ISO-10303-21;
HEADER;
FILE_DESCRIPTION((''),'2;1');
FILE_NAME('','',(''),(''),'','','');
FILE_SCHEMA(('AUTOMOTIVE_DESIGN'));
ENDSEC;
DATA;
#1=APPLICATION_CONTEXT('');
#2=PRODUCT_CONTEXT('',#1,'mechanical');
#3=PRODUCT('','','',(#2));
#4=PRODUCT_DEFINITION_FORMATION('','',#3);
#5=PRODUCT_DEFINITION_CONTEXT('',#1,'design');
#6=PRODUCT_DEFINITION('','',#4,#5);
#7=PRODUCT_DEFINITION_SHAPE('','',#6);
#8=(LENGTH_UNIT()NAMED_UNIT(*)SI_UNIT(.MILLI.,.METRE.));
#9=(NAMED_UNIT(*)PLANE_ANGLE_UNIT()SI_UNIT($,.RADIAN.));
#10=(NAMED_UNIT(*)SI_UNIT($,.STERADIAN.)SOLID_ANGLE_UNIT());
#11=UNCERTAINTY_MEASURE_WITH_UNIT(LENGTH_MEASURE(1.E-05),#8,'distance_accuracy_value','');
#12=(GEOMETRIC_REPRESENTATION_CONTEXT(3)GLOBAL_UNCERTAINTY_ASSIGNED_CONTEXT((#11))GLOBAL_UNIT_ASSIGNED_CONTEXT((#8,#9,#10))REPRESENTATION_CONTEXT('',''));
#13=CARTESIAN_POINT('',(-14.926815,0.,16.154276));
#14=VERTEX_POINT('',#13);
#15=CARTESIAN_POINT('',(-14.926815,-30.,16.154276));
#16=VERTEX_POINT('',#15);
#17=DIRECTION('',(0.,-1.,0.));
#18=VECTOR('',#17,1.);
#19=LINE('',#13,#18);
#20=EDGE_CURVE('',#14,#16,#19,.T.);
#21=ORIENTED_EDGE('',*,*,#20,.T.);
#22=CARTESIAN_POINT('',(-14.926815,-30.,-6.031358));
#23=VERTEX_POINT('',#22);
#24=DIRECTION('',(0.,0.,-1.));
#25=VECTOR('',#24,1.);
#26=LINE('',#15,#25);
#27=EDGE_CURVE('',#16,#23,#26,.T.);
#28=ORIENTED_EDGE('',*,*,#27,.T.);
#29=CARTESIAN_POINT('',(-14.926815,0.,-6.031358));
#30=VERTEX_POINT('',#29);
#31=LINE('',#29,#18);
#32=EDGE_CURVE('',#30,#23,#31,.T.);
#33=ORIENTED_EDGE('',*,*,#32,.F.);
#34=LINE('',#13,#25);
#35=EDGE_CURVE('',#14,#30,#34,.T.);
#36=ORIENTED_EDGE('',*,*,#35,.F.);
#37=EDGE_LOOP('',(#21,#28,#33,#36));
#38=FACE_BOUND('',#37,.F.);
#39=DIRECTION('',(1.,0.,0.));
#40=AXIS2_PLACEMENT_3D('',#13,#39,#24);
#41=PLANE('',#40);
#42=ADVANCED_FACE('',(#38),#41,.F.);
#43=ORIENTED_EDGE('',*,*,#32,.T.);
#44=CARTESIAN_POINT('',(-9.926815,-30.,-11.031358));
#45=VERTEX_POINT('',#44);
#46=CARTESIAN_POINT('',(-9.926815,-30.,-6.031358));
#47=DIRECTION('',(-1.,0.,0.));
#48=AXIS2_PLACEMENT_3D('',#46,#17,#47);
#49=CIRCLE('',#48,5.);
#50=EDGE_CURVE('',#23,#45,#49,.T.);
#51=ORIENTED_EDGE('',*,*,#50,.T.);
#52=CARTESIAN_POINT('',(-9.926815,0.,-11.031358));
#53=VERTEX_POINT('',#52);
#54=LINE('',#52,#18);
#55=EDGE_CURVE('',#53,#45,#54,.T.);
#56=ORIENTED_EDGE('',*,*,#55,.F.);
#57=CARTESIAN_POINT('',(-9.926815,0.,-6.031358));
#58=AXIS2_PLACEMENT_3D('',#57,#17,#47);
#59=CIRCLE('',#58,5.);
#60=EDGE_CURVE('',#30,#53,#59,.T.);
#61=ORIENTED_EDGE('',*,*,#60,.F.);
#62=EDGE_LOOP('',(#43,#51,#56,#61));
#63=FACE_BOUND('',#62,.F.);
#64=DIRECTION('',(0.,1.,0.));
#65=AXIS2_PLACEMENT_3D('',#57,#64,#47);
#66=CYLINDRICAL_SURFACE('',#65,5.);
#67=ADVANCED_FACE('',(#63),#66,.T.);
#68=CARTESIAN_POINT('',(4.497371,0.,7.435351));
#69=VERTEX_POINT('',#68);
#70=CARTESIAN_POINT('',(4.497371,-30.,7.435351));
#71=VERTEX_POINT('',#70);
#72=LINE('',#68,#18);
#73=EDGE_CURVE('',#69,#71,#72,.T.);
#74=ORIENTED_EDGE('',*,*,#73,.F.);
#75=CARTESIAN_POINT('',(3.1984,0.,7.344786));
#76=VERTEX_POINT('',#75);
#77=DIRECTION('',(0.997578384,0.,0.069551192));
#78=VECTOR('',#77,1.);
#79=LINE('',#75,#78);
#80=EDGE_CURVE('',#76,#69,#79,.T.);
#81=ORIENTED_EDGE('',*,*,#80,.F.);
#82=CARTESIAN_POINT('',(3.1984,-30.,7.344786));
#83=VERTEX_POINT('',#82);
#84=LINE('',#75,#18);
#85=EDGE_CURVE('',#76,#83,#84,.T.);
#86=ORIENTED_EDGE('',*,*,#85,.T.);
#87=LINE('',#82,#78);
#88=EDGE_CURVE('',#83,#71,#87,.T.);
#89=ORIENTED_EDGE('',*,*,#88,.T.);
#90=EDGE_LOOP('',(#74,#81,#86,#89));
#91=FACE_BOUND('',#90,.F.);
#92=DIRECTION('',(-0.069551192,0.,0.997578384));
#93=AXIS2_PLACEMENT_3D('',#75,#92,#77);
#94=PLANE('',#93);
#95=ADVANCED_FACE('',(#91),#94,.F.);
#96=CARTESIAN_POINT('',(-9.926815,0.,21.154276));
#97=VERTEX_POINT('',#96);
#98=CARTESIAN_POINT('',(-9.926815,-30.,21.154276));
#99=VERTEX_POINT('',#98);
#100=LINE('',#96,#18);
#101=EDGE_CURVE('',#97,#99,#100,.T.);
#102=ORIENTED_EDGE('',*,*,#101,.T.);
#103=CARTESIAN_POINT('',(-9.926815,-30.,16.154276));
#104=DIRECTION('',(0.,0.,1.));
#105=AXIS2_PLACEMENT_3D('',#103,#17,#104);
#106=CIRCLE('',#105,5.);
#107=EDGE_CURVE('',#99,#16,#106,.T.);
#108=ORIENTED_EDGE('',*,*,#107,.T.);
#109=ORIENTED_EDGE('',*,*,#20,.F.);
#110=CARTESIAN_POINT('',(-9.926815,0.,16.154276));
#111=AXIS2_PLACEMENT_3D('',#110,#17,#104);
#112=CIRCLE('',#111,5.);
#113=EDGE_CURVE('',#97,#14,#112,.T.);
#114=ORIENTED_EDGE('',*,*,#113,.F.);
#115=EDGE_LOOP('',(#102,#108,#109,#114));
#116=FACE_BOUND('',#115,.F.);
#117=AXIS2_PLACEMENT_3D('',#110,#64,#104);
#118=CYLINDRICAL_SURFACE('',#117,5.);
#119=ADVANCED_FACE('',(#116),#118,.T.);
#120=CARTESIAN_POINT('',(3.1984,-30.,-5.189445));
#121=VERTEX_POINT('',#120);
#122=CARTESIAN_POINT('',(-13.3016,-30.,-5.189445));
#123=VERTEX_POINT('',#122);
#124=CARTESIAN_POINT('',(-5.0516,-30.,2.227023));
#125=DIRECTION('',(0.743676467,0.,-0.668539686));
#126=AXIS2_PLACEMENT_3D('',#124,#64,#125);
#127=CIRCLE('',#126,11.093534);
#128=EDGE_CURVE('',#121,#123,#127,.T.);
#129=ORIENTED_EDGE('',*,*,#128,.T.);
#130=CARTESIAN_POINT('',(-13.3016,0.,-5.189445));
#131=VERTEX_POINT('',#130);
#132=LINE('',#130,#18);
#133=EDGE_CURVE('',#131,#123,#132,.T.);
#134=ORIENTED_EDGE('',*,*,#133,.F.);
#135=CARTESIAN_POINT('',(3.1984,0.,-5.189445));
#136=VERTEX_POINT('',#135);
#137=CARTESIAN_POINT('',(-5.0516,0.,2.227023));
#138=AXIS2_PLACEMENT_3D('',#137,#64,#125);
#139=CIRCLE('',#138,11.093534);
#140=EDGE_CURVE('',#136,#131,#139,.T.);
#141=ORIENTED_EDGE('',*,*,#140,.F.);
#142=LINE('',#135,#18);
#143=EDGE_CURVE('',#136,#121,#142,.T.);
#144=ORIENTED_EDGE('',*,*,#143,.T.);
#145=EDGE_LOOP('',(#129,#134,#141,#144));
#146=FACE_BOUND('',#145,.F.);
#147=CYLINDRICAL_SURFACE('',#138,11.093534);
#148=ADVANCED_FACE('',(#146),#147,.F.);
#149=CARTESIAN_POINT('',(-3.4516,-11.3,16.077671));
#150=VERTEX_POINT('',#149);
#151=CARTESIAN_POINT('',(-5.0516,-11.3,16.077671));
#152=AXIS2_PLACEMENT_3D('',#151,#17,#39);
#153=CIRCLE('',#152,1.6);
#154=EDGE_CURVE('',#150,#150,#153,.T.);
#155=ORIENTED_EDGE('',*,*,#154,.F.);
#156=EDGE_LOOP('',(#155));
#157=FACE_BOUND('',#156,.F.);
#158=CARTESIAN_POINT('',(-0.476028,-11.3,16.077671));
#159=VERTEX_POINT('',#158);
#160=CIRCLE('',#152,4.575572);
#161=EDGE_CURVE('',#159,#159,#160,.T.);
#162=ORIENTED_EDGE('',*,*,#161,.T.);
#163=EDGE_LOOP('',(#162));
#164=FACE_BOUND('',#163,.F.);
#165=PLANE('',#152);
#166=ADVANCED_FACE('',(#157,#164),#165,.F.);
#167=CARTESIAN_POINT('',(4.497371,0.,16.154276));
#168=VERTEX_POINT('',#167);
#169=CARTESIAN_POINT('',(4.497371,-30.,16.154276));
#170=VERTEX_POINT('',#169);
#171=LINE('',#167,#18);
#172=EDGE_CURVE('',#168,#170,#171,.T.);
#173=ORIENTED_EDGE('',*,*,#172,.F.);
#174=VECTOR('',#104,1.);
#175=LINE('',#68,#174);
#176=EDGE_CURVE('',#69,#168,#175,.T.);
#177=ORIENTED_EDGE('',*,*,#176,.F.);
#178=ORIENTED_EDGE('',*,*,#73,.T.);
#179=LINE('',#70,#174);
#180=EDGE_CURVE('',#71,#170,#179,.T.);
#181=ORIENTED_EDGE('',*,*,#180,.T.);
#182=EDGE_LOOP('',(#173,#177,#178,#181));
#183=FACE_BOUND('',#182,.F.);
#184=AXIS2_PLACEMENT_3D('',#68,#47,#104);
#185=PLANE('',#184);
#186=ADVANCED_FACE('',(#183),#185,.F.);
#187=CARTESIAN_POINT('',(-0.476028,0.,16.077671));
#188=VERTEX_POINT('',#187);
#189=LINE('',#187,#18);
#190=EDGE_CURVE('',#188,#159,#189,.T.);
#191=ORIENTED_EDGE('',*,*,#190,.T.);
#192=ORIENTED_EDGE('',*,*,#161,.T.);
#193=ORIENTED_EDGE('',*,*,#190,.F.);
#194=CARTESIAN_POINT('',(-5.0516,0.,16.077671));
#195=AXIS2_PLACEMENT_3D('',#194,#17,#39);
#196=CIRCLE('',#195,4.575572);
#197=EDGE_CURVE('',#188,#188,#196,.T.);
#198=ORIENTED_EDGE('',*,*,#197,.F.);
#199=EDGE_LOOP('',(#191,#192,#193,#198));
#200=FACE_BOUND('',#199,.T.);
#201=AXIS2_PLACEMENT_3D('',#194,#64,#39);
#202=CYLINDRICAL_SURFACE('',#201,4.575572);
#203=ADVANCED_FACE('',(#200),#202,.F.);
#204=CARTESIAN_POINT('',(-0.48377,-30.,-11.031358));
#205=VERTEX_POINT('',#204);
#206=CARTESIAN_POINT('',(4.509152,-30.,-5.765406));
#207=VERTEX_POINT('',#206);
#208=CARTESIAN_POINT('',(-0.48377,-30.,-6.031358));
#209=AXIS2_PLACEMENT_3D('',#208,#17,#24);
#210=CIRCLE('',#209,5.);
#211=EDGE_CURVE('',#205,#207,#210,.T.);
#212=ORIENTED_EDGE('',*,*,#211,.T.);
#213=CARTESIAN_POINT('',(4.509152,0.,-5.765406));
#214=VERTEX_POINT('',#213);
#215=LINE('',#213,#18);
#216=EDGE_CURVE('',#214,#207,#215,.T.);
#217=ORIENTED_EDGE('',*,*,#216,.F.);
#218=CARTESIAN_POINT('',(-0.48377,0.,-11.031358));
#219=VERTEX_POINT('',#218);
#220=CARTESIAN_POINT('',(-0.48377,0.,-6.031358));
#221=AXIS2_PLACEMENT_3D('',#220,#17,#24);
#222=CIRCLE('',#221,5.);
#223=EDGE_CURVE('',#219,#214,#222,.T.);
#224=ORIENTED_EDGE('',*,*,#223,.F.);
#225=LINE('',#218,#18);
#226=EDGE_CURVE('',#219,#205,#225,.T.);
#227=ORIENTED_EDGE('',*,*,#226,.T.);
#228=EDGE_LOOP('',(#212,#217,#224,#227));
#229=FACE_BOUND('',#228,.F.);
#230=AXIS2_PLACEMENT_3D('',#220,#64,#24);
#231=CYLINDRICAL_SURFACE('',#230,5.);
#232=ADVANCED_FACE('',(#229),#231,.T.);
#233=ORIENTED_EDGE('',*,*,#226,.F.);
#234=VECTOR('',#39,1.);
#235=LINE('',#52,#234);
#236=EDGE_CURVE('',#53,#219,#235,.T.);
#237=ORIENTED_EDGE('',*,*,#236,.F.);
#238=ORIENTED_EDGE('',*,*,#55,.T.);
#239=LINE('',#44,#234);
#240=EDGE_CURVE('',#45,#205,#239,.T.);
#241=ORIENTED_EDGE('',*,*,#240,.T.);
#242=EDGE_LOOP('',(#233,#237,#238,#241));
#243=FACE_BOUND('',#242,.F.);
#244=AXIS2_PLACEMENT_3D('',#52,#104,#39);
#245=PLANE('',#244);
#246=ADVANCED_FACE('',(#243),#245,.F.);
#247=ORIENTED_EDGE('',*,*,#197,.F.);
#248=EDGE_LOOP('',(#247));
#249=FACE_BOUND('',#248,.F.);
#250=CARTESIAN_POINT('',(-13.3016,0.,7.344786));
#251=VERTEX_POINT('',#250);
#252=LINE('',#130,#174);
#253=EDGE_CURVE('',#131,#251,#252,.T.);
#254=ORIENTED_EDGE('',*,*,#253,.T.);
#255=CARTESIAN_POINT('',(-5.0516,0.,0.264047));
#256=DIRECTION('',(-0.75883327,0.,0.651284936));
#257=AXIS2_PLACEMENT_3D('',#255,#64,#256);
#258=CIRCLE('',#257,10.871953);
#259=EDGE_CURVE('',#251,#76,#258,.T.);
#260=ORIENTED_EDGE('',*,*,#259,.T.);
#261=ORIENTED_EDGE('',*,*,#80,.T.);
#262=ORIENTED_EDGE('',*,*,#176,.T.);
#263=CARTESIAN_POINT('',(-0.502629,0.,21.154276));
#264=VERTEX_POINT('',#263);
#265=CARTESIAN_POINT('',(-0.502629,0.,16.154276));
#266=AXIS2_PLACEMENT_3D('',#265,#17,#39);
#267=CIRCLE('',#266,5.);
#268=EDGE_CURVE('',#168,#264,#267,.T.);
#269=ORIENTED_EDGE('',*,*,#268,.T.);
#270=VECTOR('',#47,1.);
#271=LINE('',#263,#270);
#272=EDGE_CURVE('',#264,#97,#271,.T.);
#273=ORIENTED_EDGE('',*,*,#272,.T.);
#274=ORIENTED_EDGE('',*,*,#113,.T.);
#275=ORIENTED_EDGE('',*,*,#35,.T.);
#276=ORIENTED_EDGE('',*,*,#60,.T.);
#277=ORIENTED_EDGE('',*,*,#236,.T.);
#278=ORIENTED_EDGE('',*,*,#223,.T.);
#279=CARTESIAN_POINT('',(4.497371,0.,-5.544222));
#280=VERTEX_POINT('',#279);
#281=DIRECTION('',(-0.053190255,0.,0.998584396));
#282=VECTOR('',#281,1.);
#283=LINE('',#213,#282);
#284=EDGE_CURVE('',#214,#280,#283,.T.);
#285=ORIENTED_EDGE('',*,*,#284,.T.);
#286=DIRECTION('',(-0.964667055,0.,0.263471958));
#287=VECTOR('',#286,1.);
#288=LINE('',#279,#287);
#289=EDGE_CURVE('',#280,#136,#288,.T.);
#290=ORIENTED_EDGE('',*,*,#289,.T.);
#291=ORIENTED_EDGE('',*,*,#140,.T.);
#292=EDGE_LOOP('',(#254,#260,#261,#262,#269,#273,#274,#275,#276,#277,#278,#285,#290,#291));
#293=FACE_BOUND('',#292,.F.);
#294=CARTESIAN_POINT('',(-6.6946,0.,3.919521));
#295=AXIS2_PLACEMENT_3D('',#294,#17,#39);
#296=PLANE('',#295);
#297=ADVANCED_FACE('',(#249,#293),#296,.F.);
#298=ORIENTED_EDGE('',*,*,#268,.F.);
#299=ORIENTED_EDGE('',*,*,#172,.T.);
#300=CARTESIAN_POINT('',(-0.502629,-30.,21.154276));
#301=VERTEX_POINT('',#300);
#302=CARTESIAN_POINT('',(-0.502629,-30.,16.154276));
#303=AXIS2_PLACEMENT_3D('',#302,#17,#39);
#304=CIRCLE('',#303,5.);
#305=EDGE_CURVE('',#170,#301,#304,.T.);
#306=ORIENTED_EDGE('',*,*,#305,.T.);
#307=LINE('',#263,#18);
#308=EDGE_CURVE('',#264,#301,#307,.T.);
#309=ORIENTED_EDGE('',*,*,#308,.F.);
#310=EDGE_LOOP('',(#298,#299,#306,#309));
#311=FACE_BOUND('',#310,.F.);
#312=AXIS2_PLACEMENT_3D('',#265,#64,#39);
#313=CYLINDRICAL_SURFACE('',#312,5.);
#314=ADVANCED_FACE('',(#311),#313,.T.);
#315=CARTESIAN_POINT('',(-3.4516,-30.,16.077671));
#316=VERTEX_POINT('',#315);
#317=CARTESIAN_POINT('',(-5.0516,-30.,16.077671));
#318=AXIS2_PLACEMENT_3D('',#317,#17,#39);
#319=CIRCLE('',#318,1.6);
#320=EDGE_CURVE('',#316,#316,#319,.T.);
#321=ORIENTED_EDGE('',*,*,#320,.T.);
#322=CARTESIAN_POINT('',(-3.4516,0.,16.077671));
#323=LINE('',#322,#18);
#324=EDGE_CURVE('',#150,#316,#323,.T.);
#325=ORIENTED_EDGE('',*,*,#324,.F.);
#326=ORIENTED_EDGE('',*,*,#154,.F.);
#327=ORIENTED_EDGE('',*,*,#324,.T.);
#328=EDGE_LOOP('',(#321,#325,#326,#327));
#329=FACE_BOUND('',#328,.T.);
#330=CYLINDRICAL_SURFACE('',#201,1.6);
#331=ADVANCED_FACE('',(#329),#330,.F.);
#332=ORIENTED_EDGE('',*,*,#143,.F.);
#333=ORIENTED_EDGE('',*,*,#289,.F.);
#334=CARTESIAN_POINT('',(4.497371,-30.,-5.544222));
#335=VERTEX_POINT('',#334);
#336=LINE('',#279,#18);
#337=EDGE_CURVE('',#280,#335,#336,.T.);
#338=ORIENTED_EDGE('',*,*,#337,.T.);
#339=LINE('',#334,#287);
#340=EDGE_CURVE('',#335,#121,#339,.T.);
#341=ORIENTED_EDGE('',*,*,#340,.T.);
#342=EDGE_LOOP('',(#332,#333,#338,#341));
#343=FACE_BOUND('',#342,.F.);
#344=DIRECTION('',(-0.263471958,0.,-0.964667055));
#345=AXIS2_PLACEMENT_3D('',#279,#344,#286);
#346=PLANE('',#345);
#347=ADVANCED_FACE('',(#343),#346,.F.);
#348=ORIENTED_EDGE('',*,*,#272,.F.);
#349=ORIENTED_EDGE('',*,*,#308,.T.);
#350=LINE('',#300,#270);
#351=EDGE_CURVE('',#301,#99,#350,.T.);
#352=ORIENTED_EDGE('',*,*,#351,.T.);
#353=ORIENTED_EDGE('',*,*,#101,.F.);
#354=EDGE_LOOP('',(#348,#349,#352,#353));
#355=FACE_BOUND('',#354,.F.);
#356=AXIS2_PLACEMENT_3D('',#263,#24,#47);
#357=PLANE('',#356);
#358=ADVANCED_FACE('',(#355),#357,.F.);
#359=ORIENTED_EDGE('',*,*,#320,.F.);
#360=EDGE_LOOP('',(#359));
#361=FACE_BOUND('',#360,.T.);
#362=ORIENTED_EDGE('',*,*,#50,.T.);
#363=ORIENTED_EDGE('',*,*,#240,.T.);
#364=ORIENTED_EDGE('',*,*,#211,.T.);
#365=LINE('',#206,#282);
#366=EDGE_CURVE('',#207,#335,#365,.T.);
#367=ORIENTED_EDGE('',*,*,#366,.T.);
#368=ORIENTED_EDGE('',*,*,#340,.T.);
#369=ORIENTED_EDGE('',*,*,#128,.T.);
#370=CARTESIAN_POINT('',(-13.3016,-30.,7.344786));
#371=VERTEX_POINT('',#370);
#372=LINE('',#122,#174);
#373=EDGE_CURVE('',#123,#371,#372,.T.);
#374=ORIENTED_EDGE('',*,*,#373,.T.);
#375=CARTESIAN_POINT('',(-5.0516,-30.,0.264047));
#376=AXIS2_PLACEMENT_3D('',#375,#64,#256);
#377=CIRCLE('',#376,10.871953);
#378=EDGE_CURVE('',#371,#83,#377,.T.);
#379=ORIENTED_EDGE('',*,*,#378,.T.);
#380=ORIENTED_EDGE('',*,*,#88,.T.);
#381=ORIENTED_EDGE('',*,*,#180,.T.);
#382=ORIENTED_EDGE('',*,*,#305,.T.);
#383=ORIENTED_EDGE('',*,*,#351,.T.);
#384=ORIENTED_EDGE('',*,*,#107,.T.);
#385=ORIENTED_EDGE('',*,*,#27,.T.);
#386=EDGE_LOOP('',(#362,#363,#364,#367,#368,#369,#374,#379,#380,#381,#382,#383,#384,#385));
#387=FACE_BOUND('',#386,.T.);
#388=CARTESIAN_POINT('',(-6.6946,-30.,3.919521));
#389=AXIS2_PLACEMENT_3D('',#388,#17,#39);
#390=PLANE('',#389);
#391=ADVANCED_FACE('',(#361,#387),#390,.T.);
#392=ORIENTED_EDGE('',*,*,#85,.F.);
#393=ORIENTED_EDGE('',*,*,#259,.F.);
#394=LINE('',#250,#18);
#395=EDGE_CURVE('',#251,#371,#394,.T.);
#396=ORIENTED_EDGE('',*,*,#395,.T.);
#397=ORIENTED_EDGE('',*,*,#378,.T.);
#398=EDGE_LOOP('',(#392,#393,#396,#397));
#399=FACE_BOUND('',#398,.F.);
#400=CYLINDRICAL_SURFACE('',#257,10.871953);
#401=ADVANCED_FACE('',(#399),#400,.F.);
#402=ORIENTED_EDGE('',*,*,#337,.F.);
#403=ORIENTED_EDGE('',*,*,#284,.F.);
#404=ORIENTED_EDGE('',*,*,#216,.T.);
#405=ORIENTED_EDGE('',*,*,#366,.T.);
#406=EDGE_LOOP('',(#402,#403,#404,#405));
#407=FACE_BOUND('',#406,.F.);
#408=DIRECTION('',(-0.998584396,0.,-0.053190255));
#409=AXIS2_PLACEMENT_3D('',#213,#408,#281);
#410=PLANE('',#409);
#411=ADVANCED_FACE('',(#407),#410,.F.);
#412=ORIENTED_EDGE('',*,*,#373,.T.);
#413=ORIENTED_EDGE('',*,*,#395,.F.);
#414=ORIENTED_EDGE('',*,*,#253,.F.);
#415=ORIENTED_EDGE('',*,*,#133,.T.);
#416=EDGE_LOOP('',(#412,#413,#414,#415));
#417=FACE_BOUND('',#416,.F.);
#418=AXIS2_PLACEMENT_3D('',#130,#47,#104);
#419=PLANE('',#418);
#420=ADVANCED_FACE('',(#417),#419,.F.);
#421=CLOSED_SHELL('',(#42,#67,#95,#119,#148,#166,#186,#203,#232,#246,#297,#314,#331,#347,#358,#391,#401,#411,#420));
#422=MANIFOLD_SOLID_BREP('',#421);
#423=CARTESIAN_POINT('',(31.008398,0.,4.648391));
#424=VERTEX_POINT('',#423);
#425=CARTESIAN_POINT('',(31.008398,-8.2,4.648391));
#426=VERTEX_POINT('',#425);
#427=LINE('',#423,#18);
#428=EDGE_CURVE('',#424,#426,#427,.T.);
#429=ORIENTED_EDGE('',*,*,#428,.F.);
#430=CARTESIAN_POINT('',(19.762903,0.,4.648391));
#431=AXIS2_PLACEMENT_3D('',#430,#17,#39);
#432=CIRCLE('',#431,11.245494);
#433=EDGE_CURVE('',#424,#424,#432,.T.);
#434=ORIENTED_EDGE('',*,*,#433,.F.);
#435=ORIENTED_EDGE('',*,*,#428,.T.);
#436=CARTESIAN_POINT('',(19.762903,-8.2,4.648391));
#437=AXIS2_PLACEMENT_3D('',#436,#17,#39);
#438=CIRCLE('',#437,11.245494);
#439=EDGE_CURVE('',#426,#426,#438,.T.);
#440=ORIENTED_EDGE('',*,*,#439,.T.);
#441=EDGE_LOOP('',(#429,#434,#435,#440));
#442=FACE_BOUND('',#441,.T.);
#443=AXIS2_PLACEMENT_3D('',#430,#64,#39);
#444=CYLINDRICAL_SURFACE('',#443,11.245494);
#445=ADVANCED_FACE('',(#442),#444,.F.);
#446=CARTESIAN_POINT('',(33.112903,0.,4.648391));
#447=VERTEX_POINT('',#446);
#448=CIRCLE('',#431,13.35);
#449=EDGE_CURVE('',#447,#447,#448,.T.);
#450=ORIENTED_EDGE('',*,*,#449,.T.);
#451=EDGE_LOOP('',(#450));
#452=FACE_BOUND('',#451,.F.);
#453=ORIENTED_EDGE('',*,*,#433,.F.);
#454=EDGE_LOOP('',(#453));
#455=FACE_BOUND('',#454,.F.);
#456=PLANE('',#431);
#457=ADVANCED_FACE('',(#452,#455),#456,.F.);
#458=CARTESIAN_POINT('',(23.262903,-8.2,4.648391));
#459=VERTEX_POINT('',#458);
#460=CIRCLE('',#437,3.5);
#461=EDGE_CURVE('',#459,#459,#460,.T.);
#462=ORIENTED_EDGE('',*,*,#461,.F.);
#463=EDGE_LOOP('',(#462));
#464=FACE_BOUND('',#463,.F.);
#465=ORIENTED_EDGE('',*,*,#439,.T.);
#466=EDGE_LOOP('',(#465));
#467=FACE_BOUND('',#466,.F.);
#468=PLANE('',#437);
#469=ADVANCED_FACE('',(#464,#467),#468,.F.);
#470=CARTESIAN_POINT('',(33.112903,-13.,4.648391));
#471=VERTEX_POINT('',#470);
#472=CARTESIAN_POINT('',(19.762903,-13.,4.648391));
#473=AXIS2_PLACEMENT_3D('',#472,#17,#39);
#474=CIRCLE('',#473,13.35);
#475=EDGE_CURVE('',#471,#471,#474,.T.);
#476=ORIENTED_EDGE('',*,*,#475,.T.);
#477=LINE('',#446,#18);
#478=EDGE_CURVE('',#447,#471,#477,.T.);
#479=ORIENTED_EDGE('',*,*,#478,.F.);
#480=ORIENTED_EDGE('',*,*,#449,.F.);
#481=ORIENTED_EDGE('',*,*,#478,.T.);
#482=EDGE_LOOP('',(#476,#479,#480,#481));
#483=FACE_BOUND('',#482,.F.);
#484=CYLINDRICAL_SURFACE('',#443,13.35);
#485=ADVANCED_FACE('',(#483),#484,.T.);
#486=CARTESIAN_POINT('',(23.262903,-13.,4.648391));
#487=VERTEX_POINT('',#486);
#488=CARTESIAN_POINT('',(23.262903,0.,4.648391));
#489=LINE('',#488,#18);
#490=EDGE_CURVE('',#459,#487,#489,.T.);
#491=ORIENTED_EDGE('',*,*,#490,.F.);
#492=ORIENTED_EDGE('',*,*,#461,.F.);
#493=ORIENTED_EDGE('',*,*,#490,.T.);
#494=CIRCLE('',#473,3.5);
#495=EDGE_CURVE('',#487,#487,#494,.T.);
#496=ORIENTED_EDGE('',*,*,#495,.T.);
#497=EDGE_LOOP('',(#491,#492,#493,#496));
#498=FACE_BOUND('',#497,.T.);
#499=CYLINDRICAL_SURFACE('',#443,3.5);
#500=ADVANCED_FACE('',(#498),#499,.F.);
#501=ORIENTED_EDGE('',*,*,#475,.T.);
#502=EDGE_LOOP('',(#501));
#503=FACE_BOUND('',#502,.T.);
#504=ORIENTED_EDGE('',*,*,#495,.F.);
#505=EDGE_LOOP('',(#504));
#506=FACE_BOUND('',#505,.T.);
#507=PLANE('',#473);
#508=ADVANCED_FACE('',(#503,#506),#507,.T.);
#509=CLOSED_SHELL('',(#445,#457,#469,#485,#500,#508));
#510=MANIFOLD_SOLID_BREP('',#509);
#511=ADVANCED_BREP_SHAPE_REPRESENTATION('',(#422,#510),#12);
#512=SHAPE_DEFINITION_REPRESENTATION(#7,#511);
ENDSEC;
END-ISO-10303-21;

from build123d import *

# Parameters (mm, degrees)
F0_R     = 4.5755719827
F0_R_2   = 1.6
F1_DEPTH = 30
F2_R     = 13.35
F2_R_2   = 11.2454943051
F2_R_3   = 3.5
F3_DEPTH = 13
F4_DEPTH = 8.2
F5_DEPTH = 11.3


# Not quite as in the source:
# - a feature names something its author has since deleted; it is built from what else it names


with BuildPart() as f1:
    # F0 (on Front) → F1 (new body)
    with BuildSketch(Plane.XZ):
        with BuildLine():
            ThreePointArc((3.1984001178, -5.1894447684), (-5.0515998822, -8.8665109514), (-13.3015998822, -5.1894447684))
            Line((-13.3015998822, -5.1894447684), (-13.3015998822, 7.3447863489))
            ThreePointArc((-13.3015998822, 7.3447863489), (-5.0515998822, 11.1360002928), (3.1984001178, 7.3447863489))
            Line((3.1984001178, 7.3447863489), (4.4973706827, 7.4353506115))
            Line((4.4973706827, 7.4353506115), (4.4973706827, 16.1542760953))
            ThreePointArc((4.4973706827, 16.1542760953), (3.0329045886, 19.6898100013), (-0.5026293173, 21.1542760953))
            Line((-0.5026293173, 21.1542760953), (-9.9268148168, 21.1542760953))
            ThreePointArc((-9.9268148168, 21.1542760953), (-13.4623487228, 19.6898100013), (-14.9268148168, 16.1542760953))
            Line((-14.9268148168, 16.1542760953), (-14.9268148168, -6.0313575723))
            ThreePointArc((-14.9268148168, -6.0313575723), (-13.4623487228, -9.5668914783), (-9.9268148168, -11.0313575723))
            Line((-9.9268148168, -11.0313575723), (-0.4837697949, -11.0313575723))
            ThreePointArc((-0.4837697949, -11.0313575723), (3.1445739305, -9.4715787586), (4.5091521871, -5.7654062964))
            Line((4.5091521871, -5.7654062964), (4.4973706827, -5.5442224257))
            Line((4.4973706827, -5.5442224257), (3.1984001178, -5.1894447684))
        make_face()
        with Locations((-5.0515998822, 16.0776707903)):
            Circle(F0_R, mode=Mode.SUBTRACT)
        with Locations((-5.0515998822, 16.0776707903)):
            Circle(F0_R)
        with Locations((-5.0515998822, 16.0776707903)):
            Circle(F0_R_2, mode=Mode.SUBTRACT)
    extrude(amount=F1_DEPTH)

    # F0 (on Front) → F5 (cut)
    with BuildSketch(Plane.XZ):
        with Locations((-5.0515998822, 16.0776707903)):
            Circle(F0_R)
        with Locations((-5.0515998822, 16.0776707903)):
            Circle(F0_R_2, mode=Mode.SUBTRACT)
    extrude(amount=F5_DEPTH, mode=Mode.SUBTRACT)


with BuildPart() as f3:
    # F2 (on Front) → F3 (new body)
    with BuildSketch(Plane.XZ):
        with Locations((19.7629034519, 4.6483911574)):
            Circle(F2_R)
        with Locations((19.7629034519, 4.6483911574)):
            Circle(F2_R_2, mode=Mode.SUBTRACT)
        with Locations((19.7629034519, 4.6483911574)):
            Circle(F2_R_2)
        with Locations((19.7629034519, 4.6483911574)):
            Circle(F2_R_3, mode=Mode.SUBTRACT)
    extrude(amount=F3_DEPTH)

    # F2 (on Front) → F4 (cut)
    with BuildSketch(Plane.XZ):
        with Locations((19.7629034519, 4.6483911574)):
            Circle(F2_R_2)
        with Locations((19.7629034519, 4.6483911574)):
            Circle(F2_R_3, mode=Mode.SUBTRACT)
    extrude(amount=F4_DEPTH, mode=Mode.SUBTRACT)


solid = Compound([f1.part, f3.part])
